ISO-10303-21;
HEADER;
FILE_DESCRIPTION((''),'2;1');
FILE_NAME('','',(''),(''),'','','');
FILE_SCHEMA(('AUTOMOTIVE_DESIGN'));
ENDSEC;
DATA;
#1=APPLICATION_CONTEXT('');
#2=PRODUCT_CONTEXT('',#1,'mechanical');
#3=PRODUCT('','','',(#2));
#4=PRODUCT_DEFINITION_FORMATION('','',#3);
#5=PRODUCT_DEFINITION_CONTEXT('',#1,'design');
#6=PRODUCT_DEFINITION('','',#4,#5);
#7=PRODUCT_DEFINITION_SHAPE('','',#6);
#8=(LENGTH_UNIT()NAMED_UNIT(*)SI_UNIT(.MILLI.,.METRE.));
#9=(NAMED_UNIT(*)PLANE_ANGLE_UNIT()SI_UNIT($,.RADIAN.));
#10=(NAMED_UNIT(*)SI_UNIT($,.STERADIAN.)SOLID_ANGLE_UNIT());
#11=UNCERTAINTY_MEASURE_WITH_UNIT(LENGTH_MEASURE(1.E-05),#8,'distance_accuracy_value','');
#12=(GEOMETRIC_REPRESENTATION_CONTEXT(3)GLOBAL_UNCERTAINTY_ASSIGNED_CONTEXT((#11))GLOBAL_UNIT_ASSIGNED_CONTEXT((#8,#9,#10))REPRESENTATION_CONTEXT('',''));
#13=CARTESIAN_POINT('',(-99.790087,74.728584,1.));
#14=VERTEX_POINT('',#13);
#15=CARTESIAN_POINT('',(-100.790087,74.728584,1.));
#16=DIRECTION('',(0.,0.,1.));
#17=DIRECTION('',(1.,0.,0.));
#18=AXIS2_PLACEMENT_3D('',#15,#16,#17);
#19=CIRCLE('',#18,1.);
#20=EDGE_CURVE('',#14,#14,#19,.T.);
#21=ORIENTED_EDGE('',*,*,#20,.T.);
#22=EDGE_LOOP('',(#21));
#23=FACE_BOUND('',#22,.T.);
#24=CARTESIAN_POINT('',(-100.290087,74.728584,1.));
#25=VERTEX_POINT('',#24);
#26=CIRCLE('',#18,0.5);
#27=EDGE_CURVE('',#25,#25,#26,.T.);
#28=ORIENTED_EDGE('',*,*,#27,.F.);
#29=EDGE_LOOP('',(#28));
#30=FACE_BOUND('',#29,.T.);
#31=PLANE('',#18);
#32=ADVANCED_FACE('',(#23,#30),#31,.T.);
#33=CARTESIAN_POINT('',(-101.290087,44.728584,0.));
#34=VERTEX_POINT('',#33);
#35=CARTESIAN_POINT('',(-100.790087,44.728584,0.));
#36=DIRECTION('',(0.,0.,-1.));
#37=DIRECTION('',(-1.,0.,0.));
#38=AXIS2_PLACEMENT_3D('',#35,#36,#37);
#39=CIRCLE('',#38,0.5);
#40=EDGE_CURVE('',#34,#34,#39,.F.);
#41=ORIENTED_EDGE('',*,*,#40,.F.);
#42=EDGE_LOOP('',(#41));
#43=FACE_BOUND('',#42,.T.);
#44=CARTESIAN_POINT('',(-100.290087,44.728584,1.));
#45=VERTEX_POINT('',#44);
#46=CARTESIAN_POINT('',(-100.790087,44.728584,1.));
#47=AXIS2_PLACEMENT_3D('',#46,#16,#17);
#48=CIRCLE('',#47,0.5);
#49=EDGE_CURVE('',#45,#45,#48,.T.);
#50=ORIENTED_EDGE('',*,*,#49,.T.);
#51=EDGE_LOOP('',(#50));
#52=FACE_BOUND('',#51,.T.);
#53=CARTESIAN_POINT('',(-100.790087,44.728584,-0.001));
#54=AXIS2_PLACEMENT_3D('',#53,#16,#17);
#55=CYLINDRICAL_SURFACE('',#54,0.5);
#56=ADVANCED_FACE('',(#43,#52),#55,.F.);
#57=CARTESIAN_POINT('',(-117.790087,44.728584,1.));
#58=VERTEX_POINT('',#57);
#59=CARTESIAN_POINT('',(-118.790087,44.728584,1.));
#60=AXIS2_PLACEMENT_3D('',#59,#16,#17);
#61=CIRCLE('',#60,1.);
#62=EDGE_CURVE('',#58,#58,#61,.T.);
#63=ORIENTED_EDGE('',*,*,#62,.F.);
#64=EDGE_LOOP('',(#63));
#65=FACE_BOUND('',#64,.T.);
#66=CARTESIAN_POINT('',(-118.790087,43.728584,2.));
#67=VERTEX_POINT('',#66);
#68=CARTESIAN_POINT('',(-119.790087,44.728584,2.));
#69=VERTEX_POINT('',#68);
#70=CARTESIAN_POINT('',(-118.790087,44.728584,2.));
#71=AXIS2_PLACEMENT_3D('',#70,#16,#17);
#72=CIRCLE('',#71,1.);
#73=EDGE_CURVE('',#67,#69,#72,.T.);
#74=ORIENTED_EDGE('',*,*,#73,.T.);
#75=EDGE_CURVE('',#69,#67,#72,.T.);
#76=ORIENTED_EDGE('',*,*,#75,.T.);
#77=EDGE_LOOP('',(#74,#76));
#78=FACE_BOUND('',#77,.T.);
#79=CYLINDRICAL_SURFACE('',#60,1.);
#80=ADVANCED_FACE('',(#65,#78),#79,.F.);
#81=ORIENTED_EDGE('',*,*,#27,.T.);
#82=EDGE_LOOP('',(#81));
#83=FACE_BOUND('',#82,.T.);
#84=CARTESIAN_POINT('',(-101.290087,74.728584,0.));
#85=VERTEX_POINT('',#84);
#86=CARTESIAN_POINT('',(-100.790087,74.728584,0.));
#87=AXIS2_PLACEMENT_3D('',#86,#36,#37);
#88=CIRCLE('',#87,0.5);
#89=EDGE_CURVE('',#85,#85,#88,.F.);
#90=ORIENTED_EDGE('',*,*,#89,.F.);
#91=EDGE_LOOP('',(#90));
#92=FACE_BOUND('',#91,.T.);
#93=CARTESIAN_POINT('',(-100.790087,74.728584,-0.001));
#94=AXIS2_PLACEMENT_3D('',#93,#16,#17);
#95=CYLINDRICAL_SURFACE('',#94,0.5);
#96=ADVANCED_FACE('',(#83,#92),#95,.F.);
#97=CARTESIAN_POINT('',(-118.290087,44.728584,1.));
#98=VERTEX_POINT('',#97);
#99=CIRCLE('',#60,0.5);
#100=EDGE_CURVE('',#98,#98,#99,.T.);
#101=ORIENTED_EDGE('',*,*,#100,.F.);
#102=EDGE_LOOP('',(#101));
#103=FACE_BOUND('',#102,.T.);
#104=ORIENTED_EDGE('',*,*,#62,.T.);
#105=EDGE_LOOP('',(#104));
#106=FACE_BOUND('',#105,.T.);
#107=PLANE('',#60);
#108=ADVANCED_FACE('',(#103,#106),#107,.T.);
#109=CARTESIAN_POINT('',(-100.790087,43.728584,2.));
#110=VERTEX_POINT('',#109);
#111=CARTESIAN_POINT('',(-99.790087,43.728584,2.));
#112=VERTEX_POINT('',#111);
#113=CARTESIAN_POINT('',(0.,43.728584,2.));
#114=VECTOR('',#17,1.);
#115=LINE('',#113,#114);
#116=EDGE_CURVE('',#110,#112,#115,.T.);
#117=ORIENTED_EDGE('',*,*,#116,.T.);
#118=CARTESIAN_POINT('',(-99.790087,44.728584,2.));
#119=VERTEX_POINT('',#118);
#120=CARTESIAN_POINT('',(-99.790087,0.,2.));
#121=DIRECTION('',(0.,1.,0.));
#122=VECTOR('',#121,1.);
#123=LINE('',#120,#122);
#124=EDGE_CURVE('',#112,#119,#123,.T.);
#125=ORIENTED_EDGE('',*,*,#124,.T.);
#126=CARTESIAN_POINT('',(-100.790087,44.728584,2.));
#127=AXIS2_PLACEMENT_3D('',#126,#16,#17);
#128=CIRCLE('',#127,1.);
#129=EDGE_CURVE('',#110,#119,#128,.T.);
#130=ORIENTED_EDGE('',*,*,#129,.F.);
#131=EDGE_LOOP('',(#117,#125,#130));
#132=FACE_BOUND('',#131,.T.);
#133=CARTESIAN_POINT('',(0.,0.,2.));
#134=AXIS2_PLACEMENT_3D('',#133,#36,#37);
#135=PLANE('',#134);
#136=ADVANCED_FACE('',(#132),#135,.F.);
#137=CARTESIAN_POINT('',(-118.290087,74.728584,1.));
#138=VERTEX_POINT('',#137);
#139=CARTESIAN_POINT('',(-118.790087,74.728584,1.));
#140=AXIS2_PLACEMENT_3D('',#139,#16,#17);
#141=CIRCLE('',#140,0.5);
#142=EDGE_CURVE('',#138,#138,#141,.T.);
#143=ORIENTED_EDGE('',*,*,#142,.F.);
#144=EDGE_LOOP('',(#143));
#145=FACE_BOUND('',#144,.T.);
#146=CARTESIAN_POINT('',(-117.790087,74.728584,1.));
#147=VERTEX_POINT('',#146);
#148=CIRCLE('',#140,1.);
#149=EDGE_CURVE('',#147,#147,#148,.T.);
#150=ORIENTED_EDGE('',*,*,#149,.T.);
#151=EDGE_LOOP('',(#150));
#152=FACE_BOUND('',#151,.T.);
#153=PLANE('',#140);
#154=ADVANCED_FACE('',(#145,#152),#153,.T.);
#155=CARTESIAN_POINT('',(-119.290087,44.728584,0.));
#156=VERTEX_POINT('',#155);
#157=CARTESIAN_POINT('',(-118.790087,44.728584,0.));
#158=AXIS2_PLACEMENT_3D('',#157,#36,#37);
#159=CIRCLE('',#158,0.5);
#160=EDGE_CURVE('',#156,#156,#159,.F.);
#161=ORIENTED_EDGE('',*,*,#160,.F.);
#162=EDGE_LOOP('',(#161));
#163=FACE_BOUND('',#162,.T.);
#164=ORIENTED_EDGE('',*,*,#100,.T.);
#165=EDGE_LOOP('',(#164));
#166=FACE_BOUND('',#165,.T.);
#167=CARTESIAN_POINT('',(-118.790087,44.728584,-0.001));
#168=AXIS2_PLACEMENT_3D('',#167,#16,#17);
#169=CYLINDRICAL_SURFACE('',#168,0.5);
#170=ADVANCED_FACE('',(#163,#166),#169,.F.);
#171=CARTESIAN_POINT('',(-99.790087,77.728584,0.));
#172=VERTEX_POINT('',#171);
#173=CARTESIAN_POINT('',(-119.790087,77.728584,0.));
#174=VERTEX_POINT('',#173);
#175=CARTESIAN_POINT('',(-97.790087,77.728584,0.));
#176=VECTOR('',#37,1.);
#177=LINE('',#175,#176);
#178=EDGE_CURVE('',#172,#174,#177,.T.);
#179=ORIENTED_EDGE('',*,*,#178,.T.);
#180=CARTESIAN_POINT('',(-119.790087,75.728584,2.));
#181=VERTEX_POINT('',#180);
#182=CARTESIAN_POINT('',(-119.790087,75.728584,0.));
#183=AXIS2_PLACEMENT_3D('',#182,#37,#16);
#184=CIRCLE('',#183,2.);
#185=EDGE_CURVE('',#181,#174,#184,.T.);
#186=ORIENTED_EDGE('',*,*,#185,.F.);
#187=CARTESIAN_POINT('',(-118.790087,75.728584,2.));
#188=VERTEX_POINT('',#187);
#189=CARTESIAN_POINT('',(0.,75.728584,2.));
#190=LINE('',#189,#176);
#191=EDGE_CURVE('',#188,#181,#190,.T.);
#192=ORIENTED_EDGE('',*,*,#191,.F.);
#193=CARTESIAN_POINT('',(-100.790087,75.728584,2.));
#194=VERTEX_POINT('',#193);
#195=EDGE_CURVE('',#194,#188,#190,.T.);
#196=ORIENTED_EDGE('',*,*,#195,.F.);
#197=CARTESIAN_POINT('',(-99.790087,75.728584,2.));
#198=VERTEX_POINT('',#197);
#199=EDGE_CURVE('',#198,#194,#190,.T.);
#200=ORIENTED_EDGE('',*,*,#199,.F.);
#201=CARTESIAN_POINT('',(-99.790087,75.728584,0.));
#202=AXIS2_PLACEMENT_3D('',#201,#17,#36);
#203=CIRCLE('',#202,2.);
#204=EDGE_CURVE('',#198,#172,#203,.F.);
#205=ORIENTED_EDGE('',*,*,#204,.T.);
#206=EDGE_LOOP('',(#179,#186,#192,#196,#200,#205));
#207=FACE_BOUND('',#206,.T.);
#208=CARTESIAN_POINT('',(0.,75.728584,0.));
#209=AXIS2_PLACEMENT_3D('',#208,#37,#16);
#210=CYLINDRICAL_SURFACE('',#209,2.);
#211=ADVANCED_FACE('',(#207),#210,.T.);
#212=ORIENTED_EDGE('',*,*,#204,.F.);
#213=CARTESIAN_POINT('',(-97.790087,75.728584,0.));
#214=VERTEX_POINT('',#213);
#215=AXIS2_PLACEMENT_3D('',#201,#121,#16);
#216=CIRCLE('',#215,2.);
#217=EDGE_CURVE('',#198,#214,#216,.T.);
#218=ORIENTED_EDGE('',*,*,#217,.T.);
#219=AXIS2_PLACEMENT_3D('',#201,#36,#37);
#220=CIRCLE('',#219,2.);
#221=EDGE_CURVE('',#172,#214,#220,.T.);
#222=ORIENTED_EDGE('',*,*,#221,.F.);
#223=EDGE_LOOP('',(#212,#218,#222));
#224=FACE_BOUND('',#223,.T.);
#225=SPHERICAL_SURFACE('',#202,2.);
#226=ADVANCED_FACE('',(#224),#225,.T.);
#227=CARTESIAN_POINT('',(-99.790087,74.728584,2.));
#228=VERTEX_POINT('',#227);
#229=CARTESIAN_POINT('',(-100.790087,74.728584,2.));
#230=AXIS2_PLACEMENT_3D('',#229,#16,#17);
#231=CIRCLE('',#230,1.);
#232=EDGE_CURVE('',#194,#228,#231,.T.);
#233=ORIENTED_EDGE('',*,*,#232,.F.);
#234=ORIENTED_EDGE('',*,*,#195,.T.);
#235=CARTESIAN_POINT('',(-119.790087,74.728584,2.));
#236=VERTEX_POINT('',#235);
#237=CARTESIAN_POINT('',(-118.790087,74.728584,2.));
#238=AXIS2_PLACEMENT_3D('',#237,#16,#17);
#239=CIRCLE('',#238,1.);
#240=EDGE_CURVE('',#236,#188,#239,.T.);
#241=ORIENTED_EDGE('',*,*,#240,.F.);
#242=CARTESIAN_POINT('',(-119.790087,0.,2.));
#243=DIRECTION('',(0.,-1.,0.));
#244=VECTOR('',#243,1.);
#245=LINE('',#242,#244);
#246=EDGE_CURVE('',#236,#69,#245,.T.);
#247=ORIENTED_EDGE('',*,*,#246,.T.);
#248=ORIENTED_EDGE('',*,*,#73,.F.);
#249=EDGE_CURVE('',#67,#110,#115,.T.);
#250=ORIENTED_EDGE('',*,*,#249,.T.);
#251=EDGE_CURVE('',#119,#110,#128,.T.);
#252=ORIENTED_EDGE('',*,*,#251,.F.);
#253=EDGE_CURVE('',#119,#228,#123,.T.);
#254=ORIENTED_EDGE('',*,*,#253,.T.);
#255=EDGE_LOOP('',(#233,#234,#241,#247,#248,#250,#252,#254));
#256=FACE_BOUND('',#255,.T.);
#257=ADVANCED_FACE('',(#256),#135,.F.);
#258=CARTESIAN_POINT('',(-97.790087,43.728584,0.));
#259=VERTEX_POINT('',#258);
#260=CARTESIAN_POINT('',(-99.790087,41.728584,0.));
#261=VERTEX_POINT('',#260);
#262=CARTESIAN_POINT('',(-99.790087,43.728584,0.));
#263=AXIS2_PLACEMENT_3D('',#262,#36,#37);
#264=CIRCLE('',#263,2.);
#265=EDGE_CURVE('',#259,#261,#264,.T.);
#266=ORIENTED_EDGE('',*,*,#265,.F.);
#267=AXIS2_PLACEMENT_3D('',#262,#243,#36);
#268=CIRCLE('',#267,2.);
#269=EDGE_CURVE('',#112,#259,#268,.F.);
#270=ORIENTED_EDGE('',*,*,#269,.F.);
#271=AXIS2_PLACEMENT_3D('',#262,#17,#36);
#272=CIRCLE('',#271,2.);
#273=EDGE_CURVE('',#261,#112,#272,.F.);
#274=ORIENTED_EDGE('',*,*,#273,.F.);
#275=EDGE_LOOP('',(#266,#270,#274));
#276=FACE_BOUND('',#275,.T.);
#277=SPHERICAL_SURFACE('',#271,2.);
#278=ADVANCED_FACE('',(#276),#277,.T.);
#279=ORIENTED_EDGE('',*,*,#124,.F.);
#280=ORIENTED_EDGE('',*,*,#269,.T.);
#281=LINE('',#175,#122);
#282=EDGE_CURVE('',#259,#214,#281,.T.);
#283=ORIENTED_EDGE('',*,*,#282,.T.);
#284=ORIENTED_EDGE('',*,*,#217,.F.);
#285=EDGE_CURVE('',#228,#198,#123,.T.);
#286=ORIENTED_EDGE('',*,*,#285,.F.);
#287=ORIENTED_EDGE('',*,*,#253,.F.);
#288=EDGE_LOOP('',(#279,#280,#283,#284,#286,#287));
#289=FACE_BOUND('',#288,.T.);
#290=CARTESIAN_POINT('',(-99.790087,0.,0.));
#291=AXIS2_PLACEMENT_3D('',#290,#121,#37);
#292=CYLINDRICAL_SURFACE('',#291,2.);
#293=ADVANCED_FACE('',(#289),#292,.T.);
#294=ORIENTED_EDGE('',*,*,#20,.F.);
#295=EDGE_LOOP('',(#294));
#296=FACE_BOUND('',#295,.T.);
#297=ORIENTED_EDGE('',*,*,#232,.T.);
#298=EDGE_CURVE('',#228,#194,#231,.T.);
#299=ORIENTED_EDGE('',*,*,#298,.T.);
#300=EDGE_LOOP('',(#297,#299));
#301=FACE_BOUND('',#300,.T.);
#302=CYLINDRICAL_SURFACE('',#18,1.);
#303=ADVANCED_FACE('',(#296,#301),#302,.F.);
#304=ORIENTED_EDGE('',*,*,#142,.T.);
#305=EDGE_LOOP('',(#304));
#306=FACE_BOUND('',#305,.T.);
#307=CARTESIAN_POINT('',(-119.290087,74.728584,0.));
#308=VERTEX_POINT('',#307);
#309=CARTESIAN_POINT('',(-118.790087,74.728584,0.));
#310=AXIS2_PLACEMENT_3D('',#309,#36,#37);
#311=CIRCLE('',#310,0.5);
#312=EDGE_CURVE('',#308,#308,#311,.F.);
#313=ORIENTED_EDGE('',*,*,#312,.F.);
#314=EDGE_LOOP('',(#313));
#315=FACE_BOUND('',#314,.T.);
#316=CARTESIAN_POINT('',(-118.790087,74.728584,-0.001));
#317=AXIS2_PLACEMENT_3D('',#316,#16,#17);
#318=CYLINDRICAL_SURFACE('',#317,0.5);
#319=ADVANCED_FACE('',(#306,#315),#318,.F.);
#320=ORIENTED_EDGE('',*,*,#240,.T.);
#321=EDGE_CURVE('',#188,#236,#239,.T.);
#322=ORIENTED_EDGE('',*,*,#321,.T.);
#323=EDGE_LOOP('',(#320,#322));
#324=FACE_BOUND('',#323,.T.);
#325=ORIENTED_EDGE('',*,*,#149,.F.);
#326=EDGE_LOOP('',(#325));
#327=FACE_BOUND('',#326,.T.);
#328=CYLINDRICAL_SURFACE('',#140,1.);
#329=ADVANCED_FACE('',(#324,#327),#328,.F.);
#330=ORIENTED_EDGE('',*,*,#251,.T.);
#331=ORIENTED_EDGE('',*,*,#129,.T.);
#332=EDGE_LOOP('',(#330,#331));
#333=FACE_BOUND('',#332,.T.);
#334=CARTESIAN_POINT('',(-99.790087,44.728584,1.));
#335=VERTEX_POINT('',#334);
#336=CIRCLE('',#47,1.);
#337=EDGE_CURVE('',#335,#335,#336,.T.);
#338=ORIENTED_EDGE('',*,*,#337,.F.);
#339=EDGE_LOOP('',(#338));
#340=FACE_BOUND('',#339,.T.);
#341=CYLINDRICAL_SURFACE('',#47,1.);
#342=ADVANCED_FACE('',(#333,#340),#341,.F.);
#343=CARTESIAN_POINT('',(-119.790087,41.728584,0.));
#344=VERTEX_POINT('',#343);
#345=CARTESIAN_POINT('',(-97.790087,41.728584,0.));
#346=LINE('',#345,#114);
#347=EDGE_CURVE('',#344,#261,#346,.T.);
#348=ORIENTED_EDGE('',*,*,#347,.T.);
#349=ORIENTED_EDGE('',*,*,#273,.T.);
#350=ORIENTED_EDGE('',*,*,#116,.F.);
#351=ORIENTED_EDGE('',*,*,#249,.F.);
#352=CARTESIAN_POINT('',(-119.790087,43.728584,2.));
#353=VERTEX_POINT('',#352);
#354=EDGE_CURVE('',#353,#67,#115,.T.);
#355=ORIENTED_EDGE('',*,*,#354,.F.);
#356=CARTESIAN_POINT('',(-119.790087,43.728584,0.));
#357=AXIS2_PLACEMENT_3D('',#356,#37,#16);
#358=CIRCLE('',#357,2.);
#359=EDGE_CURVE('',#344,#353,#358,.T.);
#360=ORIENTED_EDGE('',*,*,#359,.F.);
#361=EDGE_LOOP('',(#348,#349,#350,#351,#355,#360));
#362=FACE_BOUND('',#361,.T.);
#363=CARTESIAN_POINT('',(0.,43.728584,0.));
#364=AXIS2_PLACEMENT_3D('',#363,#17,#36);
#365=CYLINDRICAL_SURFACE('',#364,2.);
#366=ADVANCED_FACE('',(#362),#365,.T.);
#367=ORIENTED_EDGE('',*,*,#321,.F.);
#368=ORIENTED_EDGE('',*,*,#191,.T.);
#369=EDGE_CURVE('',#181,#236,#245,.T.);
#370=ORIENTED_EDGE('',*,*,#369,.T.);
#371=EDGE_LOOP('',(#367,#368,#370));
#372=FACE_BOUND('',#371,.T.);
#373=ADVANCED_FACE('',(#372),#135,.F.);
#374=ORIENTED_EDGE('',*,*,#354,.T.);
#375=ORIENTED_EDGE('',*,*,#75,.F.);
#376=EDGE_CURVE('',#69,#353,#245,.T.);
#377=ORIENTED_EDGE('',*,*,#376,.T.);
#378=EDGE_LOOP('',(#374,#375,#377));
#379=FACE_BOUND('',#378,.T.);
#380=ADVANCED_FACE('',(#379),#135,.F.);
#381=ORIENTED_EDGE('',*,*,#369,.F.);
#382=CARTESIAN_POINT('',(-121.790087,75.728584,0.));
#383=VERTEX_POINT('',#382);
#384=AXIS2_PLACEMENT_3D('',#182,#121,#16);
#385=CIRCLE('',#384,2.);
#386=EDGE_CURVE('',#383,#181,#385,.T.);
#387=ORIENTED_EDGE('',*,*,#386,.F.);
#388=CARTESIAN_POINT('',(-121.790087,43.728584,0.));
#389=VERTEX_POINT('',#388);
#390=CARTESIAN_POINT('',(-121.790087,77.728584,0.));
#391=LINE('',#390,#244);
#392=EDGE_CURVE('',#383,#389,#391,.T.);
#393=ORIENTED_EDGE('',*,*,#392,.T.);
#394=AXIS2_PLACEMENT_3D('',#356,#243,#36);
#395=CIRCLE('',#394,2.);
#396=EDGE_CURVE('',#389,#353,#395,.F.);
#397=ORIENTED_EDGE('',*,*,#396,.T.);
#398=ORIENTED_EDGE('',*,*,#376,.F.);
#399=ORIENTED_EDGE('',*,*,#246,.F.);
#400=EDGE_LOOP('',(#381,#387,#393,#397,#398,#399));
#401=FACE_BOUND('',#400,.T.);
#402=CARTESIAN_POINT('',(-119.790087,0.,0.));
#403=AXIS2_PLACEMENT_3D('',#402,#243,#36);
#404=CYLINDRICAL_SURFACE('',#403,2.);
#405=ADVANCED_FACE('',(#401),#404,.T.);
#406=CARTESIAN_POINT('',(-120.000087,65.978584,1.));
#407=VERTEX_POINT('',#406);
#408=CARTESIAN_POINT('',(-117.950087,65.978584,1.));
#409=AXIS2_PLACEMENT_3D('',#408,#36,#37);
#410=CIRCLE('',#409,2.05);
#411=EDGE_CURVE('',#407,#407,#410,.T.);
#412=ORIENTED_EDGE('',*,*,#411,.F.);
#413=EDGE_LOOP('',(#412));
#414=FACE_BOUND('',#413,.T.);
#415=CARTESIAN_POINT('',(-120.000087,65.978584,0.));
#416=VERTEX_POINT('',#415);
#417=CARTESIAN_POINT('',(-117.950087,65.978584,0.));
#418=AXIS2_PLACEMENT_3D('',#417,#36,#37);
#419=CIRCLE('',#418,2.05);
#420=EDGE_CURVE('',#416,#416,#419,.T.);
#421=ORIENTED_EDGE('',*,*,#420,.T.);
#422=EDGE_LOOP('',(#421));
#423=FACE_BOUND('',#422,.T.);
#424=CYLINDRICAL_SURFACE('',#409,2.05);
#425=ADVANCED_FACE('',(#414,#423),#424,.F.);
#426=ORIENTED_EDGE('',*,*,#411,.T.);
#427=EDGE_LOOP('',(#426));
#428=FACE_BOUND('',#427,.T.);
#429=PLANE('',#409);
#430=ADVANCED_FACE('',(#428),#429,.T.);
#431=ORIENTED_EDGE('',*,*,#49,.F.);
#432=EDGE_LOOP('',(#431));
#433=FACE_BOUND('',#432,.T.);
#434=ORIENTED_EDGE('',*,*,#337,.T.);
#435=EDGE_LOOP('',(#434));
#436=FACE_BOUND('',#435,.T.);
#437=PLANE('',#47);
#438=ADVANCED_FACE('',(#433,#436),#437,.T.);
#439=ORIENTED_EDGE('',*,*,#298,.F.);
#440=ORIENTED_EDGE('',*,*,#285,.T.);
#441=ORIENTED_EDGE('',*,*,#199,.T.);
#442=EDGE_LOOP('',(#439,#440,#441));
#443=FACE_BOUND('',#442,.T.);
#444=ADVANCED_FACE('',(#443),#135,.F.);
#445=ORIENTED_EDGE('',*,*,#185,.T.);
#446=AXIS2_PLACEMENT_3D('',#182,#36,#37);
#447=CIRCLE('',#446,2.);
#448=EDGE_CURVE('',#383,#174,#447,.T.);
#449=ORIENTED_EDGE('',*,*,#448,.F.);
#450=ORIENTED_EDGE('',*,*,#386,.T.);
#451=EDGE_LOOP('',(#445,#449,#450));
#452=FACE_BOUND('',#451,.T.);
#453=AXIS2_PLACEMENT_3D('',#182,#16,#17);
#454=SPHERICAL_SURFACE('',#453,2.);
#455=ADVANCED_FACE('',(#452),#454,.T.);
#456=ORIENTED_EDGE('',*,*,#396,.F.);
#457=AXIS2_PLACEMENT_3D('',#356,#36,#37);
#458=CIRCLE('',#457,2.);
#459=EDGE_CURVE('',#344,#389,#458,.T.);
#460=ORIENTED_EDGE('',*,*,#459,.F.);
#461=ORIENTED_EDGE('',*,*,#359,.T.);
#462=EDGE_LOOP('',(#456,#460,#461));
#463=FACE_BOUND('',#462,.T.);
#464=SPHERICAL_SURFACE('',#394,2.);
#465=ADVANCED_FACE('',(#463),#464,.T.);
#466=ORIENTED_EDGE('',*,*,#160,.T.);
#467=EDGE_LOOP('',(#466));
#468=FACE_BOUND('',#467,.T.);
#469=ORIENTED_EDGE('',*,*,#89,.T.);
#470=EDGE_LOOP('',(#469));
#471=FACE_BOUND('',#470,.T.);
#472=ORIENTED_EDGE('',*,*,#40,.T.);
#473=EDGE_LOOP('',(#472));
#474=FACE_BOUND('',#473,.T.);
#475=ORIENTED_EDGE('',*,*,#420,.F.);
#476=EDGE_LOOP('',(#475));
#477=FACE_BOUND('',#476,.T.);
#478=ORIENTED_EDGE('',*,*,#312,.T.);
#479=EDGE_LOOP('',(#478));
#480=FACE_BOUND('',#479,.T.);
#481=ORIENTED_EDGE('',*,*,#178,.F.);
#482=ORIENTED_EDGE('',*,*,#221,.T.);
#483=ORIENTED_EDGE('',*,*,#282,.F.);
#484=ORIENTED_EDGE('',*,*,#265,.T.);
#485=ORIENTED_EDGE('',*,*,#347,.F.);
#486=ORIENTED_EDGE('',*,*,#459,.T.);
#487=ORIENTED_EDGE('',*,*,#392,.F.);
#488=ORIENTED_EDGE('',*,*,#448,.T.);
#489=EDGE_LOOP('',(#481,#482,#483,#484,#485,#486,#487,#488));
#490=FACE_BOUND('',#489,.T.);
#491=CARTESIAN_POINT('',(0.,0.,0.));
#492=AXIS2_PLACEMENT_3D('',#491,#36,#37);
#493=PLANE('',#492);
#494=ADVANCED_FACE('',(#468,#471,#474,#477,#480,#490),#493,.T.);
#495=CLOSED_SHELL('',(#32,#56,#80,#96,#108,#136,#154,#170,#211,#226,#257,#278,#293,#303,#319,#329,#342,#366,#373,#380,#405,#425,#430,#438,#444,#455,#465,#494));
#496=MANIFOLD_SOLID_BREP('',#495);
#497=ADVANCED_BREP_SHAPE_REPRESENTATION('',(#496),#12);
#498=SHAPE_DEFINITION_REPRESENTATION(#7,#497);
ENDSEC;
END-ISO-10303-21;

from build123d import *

# Parameters (mm, degrees)
SKETCH_1_W          = 24
SKETCH_1_H          = 36
EXTRUDE_1_DEPTH     = 2
FILLET_1_R          = 2
SKETCH_4_R          = 2.05
CUT_EXTRUDE_1_DEPTH = 1
SKETCH_9_R          = 1
CUT_EXTRUDE_3_DEPTH = 1
CUT_EXTRUDE_4_REACH = 146.484
SKETCH_10_R         = 0.5


with BuildPart() as part:
    # 草图1 → 凸台-拉伸1 (new body)
    with BuildSketch(Plane.XY):
        with Locations((-109.790086771, 59.72858385)):
            Rectangle(SKETCH_1_W, SKETCH_1_H)
    extrude(amount=EXTRUDE_1_DEPTH)

    # 圆角1
    fillet_1_edges = [part.edges().sort_by_distance(p)[0] for p in [
        (-121.790086771, 59.72858385, 2),
        (-109.790086771, 41.72858385, 2),
        (-97.790086771, 59.72858385, 2),
        (-97.790086771, 41.72858385, 1),
        (-121.790086771, 41.72858385, 1),
        (-121.790086771, 77.72858385, 1),
        (-97.790086771, 77.72858385, 1),
        (-109.790086771, 77.72858385, 2),
    ]]
    fillet(fillet_1_edges, radius=FILLET_1_R - 0.0001)  # a hair under: the kernel refuses the full size

    # 草图4 → 切除-拉伸1 (cut)
    with BuildSketch(Plane(origin=(0, 0, 0), x_dir=(-1, 0, 0), z_dir=(0, 0, -1))):
        with Locations((117.950086771, 65.97858385)):
            Circle(SKETCH_4_R)
    extrude(amount=-CUT_EXTRUDE_1_DEPTH, mode=Mode.SUBTRACT)

    # 草图9 → 切除-拉伸3 (cut)
    with BuildSketch(Plane.XY.offset(2)):
        with Locations((-100.790086771, 74.72858385)):
            Circle(SKETCH_9_R)
        with Locations((-100.790086771, 44.72858385)):
            Circle(SKETCH_9_R)
        with Locations((-118.790086771, 44.72858385)):
            Circle(SKETCH_9_R)
        with Locations((-118.790086771, 74.72858385)):
            Circle(SKETCH_9_R)
    extrude(amount=-CUT_EXTRUDE_3_DEPTH, mode=Mode.SUBTRACT)

    # 草图10 → 切除-拉伸4 (cut, up to next)
    with BuildSketch(Plane.XY.offset(1), mode=Mode.PRIVATE) as cut_extrude_4_sk1:
        with Locations((-118.790086771, 44.72858385)):
            Circle(SKETCH_10_R)
    cut_extrude_4_tool1 = extrude(cut_extrude_4_sk1.sketch, amount=-CUT_EXTRUDE_4_REACH, mode=Mode.PRIVATE) & part.part
    # 草图10 → 切除-拉伸4 (cut, up to next)
    with BuildSketch(Plane.XY.offset(1), mode=Mode.PRIVATE) as cut_extrude_4_sk2:
        with Locations((-100.790086771, 44.72858385)):
            Circle(SKETCH_10_R)
    cut_extrude_4_tool2 = extrude(cut_extrude_4_sk2.sketch, amount=-CUT_EXTRUDE_4_REACH, mode=Mode.PRIVATE) & part.part
    # 草图10 → 切除-拉伸4 (cut, up to next)
    with BuildSketch(Plane.XY.offset(1), mode=Mode.PRIVATE) as cut_extrude_4_sk3:
        with Locations((-100.790086771, 74.72858385)):
            Circle(SKETCH_10_R)
    cut_extrude_4_tool3 = extrude(cut_extrude_4_sk3.sketch, amount=-CUT_EXTRUDE_4_REACH, mode=Mode.PRIVATE) & part.part
    # 草图10 → 切除-拉伸4 (cut, up to next)
    with BuildSketch(Plane.XY.offset(1), mode=Mode.PRIVATE) as cut_extrude_4_sk4:
        with Locations((-118.790086771, 74.72858385)):
            Circle(SKETCH_10_R)
    cut_extrude_4_tool4 = extrude(cut_extrude_4_sk4.sketch, amount=-CUT_EXTRUDE_4_REACH, mode=Mode.PRIVATE) & part.part
    add(cut_extrude_4_tool1.solids().sort_by_distance((-118.790087, 44.728584, 1))[0], mode=Mode.SUBTRACT)
    add(cut_extrude_4_tool2.solids().sort_by_distance((-100.790087, 44.728584, 1))[0], mode=Mode.SUBTRACT)
    add(cut_extrude_4_tool3.solids().sort_by_distance((-100.790087, 74.728584, 1))[0], mode=Mode.SUBTRACT)
    add(cut_extrude_4_tool4.solids().sort_by_distance((-118.790087, 74.728584, 1))[0], mode=Mode.SUBTRACT)


solid = part.part
